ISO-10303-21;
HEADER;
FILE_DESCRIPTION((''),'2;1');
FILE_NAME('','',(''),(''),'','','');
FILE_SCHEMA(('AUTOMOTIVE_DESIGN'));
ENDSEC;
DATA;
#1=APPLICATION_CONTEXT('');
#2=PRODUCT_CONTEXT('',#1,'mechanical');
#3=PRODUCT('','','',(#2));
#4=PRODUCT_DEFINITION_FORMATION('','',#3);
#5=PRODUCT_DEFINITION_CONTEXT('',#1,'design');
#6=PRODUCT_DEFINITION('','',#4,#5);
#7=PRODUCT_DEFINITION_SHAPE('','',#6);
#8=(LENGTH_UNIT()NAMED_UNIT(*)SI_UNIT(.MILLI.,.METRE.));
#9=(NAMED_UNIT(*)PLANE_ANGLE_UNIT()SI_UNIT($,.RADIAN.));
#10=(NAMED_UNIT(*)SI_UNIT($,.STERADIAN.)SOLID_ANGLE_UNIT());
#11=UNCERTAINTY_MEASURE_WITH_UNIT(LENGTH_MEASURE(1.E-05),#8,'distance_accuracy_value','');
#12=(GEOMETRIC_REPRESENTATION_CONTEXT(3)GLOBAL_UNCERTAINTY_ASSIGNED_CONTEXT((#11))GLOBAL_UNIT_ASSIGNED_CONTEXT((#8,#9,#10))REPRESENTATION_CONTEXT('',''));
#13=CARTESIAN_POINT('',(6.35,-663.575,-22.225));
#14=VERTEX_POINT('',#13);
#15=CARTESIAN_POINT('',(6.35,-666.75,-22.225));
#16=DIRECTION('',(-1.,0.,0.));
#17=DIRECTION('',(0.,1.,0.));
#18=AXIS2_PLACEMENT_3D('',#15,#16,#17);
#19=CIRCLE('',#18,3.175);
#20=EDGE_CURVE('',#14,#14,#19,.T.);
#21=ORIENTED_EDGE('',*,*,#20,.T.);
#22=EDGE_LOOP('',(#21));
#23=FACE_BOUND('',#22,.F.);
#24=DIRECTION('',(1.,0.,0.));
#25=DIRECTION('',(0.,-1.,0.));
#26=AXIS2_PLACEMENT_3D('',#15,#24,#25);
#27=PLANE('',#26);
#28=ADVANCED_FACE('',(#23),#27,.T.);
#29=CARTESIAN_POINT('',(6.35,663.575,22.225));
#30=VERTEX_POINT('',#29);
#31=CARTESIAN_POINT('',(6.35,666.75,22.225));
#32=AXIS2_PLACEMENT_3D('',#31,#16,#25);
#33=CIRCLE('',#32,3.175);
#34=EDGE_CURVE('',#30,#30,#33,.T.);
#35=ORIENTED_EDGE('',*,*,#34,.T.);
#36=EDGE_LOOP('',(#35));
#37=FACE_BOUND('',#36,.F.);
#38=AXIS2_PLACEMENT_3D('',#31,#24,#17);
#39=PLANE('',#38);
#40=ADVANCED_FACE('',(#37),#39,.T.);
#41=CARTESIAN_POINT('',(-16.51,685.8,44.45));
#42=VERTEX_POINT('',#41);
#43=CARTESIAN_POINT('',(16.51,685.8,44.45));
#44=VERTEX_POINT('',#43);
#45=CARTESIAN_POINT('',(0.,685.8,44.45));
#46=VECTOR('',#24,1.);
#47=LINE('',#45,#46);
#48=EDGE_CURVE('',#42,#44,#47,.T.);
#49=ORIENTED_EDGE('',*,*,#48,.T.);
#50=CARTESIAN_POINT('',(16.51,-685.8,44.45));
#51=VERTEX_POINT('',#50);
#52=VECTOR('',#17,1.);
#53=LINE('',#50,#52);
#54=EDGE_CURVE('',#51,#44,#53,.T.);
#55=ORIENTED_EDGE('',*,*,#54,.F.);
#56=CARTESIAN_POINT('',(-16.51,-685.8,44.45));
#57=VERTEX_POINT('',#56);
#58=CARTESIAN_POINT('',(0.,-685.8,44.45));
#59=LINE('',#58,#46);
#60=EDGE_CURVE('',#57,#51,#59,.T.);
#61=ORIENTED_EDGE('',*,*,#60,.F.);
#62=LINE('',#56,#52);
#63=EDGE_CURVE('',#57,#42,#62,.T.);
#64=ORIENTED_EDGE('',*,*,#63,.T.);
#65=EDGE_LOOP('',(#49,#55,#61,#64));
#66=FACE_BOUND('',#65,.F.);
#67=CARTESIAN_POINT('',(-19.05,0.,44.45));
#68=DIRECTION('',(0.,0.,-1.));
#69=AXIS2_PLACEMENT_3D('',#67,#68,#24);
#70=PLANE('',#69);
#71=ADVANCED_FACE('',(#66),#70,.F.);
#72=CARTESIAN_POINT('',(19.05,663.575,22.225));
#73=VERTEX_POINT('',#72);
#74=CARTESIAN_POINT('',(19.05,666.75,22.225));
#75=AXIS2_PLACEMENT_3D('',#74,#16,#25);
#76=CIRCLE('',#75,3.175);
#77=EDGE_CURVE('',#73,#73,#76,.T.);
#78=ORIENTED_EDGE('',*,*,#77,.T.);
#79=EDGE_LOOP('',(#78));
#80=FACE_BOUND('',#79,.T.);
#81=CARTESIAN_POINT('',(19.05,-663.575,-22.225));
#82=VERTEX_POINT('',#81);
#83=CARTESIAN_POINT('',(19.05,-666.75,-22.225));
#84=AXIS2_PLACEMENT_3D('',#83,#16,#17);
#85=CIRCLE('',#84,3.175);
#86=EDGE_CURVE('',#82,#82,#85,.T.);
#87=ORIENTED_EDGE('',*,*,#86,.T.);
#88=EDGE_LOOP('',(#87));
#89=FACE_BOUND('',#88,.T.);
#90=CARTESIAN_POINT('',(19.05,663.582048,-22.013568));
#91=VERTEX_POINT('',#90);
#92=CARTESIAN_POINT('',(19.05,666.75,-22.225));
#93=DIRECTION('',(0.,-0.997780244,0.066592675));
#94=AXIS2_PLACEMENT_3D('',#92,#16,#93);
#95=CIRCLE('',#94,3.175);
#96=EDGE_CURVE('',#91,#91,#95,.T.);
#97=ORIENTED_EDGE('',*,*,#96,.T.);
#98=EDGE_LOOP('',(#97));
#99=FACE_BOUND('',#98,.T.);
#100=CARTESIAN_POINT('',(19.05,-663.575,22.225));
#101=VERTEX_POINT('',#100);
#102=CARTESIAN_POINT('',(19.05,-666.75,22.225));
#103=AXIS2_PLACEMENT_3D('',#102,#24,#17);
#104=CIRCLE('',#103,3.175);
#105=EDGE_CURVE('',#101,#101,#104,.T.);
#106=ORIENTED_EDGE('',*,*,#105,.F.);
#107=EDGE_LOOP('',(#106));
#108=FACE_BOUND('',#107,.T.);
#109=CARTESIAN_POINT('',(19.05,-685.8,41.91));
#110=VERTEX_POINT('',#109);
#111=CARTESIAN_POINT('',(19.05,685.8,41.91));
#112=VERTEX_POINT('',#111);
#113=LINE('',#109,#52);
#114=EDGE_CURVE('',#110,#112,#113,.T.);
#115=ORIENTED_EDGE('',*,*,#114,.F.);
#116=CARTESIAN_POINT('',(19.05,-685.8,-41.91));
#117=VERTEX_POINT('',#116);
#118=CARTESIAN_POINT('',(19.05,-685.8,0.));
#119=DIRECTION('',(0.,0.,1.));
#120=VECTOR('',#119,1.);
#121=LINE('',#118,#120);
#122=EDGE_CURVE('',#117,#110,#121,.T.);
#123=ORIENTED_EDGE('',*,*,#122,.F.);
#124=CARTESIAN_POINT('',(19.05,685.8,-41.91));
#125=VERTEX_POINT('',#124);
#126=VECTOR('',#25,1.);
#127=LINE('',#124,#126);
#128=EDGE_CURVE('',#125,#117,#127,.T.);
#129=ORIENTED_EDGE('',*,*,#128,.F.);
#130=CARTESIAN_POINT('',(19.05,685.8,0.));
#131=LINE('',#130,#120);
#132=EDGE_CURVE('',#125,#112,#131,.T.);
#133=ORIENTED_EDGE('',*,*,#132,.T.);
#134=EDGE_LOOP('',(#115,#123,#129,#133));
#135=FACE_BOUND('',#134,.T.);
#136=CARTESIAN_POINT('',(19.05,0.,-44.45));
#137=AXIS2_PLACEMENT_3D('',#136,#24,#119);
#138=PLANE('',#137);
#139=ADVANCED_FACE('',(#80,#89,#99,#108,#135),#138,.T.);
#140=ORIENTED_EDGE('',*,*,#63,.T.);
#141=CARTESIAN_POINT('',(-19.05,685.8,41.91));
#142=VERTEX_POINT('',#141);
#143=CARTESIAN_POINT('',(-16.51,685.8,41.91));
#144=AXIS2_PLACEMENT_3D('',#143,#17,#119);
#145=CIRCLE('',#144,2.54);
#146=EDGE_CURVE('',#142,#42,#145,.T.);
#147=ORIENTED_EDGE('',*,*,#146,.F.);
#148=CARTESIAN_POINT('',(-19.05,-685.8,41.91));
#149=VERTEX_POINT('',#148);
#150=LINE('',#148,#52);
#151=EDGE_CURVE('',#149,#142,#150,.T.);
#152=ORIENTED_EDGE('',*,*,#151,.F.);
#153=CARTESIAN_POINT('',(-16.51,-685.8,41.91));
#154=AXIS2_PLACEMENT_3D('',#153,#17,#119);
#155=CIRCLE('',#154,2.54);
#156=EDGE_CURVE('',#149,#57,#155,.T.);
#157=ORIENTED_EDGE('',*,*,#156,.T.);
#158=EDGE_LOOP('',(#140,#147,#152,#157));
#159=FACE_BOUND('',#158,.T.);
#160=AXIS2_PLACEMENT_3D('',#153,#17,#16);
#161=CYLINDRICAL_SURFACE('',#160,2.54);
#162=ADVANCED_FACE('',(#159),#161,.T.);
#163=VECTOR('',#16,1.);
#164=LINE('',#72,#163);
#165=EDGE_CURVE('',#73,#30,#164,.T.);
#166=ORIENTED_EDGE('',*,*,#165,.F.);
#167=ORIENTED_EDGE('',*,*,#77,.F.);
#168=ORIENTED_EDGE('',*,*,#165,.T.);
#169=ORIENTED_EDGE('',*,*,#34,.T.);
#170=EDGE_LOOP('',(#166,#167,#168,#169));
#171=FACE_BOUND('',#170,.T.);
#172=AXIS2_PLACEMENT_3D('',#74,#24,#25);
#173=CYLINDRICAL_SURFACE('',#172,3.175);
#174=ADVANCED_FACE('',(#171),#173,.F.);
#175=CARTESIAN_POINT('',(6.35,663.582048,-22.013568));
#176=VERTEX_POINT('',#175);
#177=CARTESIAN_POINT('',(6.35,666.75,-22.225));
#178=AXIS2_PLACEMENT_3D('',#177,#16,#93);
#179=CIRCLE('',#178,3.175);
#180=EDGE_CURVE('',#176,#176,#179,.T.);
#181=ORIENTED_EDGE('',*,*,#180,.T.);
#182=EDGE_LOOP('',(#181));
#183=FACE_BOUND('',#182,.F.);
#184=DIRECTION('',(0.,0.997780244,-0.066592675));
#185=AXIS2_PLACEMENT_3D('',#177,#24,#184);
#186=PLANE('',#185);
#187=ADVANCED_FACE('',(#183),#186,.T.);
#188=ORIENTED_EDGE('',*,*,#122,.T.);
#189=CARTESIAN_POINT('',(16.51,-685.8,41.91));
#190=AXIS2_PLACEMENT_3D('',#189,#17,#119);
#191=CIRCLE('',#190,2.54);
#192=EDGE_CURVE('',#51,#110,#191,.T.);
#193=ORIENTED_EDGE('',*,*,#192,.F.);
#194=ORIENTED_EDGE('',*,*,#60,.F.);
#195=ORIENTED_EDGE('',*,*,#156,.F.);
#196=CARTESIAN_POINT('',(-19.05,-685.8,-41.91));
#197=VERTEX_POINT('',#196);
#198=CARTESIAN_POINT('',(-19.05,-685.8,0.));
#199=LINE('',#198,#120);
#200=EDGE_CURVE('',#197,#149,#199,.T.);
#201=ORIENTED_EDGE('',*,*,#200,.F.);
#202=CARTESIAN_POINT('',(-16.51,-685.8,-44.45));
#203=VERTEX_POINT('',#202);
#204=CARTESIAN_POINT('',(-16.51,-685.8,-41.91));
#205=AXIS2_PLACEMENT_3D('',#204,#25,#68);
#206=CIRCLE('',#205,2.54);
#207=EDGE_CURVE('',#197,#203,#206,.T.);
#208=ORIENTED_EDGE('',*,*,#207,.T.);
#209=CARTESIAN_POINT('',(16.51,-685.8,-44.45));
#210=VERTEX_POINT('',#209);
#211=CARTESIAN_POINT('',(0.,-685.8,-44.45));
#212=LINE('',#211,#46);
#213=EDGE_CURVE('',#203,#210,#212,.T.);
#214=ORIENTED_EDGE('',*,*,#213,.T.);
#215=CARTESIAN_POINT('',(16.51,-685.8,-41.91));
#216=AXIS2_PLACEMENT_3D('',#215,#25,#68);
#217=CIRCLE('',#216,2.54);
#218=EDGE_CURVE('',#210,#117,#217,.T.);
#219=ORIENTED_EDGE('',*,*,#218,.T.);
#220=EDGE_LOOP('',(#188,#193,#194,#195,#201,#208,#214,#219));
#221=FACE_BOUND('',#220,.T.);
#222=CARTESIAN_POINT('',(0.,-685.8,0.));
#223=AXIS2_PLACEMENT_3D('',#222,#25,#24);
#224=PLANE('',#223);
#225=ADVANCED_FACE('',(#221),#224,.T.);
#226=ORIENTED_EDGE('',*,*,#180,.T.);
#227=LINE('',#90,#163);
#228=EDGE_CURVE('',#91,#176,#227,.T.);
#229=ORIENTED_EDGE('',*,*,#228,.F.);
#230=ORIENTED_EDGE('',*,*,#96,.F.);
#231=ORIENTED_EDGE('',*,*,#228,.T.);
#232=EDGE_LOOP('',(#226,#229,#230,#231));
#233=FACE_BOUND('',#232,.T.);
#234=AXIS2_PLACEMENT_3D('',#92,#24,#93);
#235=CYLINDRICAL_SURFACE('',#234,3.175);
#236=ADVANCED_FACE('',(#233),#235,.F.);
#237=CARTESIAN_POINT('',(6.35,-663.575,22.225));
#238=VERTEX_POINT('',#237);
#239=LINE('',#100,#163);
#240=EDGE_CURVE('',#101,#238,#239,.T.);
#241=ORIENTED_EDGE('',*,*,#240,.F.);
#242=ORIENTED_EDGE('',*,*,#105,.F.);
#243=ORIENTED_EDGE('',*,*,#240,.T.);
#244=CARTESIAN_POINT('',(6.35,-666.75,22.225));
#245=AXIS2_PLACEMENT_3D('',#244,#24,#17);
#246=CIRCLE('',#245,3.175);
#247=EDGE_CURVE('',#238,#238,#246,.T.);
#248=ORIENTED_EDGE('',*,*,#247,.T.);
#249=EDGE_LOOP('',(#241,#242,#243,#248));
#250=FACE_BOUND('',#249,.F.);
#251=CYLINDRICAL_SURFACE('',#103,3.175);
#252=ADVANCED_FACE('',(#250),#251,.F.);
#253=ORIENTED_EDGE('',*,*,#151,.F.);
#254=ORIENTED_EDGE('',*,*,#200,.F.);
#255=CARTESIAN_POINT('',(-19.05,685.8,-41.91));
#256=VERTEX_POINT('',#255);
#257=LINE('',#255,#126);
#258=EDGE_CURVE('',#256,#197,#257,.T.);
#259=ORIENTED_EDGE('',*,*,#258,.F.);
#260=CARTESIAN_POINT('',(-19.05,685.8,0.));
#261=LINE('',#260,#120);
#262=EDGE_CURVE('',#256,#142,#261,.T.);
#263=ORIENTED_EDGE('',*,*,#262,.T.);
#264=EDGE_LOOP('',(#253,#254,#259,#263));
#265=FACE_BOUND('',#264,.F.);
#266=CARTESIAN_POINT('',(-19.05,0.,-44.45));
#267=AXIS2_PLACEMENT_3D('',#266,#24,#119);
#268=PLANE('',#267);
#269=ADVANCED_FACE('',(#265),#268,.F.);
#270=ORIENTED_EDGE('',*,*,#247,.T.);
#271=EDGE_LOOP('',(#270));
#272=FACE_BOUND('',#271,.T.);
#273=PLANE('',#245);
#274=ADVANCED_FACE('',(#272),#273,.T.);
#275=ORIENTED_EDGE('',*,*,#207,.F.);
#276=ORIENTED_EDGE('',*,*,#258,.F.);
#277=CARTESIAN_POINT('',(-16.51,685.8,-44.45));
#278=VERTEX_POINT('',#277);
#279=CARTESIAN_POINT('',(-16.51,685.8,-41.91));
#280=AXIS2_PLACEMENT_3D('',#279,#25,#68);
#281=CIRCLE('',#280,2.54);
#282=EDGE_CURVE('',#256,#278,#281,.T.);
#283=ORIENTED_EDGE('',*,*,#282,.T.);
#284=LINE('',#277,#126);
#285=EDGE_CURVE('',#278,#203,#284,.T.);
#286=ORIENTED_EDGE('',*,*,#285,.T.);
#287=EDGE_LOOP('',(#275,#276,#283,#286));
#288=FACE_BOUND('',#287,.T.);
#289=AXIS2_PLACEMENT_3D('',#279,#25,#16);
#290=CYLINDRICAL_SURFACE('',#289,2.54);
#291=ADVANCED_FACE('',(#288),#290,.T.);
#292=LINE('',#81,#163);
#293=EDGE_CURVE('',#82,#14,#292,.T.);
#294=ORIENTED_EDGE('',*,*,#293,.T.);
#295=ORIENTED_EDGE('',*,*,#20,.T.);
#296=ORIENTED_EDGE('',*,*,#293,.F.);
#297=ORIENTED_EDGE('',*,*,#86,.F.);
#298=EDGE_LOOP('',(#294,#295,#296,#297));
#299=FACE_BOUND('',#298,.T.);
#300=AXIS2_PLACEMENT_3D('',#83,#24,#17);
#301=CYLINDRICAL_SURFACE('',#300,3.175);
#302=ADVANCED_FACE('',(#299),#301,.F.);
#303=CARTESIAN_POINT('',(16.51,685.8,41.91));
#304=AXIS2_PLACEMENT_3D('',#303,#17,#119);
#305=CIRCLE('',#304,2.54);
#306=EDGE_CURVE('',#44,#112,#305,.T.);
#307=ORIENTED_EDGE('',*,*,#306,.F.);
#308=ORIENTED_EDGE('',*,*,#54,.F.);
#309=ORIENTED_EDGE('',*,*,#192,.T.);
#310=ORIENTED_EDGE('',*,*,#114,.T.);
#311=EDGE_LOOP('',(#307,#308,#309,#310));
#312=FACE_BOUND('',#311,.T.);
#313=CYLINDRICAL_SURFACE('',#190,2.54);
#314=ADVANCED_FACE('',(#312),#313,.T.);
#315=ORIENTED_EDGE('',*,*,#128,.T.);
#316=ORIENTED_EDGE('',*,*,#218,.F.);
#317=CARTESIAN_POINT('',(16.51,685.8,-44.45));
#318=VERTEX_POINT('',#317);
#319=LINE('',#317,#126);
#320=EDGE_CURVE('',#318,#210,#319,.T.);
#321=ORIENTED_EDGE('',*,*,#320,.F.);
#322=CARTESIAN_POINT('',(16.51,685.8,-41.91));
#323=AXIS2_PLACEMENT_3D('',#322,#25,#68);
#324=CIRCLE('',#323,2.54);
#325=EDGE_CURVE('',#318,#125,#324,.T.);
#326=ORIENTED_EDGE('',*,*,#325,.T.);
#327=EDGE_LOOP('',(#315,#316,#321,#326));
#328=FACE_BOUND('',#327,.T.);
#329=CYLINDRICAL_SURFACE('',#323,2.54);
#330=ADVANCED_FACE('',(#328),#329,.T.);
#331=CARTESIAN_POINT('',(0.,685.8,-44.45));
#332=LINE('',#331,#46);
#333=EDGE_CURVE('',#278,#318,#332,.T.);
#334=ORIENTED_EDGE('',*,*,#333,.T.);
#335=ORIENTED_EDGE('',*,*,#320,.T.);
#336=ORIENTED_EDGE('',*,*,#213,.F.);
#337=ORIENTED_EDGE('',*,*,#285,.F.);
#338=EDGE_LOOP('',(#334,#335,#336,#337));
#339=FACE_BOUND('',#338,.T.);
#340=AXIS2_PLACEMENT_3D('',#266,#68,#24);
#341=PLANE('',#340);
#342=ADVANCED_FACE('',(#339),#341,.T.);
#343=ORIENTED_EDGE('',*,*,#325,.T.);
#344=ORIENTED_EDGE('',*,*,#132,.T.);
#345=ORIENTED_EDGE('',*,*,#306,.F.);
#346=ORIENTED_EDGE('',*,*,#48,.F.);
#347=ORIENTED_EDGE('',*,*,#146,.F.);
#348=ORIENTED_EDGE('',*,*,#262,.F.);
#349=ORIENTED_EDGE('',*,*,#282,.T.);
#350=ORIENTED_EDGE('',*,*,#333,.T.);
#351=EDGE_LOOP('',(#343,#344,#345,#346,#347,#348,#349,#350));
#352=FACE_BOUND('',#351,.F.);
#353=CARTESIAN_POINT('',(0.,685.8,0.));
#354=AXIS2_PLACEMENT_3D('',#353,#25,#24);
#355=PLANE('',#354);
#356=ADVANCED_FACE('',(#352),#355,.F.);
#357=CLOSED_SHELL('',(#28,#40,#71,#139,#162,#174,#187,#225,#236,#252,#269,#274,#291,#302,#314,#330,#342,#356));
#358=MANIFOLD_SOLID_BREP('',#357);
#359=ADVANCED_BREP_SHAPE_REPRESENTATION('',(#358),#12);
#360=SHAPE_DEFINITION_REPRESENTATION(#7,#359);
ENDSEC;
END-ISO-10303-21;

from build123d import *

# Parameters (mm, degrees)
F0_W          = 38.1
F0_H          = 88.9
F1_DEPTH      = 685.8
F1_DEPTH_BACK = 685.8
F2_R          = 3.175
F3_DEPTH      = 12.7
F4_R          = 2.54


# Not quite as in the source:
# - a length typed as a fraction of an inch, garbled in the dataset ("3 / 203.2 mm" for 3/8 in), is restored
# - a pattern or mirror of a feature is missing from the dataset's text; its kind, count and spacing are read off the source's solid


with BuildPart() as f1:
    # F0 (on Front) → F1 (new body, two sides)
    with BuildSketch(Plane.XZ) as f1_sk:
        Rectangle(F0_W, F0_H)
    extrude(amount=F1_DEPTH)
    extrude(f1_sk.sketch, amount=-F1_DEPTH_BACK)

    # F2 (on face) → F3 (cut)
    with BuildSketch(Plane.YZ.offset(19.05)):
        with Locations((-666.75, 22.225)):
            Circle(F2_R)
    f3 = extrude(amount=-F3_DEPTH, mode=Mode.SUBTRACT)

    # F3_copies: F3 across plane
    add(f3.mirror(Plane(origin=(0, 0, 0), x_dir=(0, 0.0333148302, 0.999444907), z_dir=(0, 0.999444907, -0.0333148302))), mode=Mode.SUBTRACT)

    # F3_copies1: F3 across plane
    add(f3.mirror(Plane(origin=(0, 0, 0), x_dir=(-1, 0, 0), z_dir=(0, 0, -1))), mode=Mode.SUBTRACT)

    # F3_copies2: F3 across plane
    add(f3.mirror(Plane.ZX), mode=Mode.SUBTRACT)

    # F4
    f4_edges = [f1.edges().sort_by_distance(p)[0] for p in [
        (19.05, 0, 44.45),
        (-19.05, 0, 44.45),
        (19.05, 0, -44.45),
        (-19.05, 0, -44.45),
    ]]
    fillet(f4_edges, radius=F4_R)


solid = f1.part
